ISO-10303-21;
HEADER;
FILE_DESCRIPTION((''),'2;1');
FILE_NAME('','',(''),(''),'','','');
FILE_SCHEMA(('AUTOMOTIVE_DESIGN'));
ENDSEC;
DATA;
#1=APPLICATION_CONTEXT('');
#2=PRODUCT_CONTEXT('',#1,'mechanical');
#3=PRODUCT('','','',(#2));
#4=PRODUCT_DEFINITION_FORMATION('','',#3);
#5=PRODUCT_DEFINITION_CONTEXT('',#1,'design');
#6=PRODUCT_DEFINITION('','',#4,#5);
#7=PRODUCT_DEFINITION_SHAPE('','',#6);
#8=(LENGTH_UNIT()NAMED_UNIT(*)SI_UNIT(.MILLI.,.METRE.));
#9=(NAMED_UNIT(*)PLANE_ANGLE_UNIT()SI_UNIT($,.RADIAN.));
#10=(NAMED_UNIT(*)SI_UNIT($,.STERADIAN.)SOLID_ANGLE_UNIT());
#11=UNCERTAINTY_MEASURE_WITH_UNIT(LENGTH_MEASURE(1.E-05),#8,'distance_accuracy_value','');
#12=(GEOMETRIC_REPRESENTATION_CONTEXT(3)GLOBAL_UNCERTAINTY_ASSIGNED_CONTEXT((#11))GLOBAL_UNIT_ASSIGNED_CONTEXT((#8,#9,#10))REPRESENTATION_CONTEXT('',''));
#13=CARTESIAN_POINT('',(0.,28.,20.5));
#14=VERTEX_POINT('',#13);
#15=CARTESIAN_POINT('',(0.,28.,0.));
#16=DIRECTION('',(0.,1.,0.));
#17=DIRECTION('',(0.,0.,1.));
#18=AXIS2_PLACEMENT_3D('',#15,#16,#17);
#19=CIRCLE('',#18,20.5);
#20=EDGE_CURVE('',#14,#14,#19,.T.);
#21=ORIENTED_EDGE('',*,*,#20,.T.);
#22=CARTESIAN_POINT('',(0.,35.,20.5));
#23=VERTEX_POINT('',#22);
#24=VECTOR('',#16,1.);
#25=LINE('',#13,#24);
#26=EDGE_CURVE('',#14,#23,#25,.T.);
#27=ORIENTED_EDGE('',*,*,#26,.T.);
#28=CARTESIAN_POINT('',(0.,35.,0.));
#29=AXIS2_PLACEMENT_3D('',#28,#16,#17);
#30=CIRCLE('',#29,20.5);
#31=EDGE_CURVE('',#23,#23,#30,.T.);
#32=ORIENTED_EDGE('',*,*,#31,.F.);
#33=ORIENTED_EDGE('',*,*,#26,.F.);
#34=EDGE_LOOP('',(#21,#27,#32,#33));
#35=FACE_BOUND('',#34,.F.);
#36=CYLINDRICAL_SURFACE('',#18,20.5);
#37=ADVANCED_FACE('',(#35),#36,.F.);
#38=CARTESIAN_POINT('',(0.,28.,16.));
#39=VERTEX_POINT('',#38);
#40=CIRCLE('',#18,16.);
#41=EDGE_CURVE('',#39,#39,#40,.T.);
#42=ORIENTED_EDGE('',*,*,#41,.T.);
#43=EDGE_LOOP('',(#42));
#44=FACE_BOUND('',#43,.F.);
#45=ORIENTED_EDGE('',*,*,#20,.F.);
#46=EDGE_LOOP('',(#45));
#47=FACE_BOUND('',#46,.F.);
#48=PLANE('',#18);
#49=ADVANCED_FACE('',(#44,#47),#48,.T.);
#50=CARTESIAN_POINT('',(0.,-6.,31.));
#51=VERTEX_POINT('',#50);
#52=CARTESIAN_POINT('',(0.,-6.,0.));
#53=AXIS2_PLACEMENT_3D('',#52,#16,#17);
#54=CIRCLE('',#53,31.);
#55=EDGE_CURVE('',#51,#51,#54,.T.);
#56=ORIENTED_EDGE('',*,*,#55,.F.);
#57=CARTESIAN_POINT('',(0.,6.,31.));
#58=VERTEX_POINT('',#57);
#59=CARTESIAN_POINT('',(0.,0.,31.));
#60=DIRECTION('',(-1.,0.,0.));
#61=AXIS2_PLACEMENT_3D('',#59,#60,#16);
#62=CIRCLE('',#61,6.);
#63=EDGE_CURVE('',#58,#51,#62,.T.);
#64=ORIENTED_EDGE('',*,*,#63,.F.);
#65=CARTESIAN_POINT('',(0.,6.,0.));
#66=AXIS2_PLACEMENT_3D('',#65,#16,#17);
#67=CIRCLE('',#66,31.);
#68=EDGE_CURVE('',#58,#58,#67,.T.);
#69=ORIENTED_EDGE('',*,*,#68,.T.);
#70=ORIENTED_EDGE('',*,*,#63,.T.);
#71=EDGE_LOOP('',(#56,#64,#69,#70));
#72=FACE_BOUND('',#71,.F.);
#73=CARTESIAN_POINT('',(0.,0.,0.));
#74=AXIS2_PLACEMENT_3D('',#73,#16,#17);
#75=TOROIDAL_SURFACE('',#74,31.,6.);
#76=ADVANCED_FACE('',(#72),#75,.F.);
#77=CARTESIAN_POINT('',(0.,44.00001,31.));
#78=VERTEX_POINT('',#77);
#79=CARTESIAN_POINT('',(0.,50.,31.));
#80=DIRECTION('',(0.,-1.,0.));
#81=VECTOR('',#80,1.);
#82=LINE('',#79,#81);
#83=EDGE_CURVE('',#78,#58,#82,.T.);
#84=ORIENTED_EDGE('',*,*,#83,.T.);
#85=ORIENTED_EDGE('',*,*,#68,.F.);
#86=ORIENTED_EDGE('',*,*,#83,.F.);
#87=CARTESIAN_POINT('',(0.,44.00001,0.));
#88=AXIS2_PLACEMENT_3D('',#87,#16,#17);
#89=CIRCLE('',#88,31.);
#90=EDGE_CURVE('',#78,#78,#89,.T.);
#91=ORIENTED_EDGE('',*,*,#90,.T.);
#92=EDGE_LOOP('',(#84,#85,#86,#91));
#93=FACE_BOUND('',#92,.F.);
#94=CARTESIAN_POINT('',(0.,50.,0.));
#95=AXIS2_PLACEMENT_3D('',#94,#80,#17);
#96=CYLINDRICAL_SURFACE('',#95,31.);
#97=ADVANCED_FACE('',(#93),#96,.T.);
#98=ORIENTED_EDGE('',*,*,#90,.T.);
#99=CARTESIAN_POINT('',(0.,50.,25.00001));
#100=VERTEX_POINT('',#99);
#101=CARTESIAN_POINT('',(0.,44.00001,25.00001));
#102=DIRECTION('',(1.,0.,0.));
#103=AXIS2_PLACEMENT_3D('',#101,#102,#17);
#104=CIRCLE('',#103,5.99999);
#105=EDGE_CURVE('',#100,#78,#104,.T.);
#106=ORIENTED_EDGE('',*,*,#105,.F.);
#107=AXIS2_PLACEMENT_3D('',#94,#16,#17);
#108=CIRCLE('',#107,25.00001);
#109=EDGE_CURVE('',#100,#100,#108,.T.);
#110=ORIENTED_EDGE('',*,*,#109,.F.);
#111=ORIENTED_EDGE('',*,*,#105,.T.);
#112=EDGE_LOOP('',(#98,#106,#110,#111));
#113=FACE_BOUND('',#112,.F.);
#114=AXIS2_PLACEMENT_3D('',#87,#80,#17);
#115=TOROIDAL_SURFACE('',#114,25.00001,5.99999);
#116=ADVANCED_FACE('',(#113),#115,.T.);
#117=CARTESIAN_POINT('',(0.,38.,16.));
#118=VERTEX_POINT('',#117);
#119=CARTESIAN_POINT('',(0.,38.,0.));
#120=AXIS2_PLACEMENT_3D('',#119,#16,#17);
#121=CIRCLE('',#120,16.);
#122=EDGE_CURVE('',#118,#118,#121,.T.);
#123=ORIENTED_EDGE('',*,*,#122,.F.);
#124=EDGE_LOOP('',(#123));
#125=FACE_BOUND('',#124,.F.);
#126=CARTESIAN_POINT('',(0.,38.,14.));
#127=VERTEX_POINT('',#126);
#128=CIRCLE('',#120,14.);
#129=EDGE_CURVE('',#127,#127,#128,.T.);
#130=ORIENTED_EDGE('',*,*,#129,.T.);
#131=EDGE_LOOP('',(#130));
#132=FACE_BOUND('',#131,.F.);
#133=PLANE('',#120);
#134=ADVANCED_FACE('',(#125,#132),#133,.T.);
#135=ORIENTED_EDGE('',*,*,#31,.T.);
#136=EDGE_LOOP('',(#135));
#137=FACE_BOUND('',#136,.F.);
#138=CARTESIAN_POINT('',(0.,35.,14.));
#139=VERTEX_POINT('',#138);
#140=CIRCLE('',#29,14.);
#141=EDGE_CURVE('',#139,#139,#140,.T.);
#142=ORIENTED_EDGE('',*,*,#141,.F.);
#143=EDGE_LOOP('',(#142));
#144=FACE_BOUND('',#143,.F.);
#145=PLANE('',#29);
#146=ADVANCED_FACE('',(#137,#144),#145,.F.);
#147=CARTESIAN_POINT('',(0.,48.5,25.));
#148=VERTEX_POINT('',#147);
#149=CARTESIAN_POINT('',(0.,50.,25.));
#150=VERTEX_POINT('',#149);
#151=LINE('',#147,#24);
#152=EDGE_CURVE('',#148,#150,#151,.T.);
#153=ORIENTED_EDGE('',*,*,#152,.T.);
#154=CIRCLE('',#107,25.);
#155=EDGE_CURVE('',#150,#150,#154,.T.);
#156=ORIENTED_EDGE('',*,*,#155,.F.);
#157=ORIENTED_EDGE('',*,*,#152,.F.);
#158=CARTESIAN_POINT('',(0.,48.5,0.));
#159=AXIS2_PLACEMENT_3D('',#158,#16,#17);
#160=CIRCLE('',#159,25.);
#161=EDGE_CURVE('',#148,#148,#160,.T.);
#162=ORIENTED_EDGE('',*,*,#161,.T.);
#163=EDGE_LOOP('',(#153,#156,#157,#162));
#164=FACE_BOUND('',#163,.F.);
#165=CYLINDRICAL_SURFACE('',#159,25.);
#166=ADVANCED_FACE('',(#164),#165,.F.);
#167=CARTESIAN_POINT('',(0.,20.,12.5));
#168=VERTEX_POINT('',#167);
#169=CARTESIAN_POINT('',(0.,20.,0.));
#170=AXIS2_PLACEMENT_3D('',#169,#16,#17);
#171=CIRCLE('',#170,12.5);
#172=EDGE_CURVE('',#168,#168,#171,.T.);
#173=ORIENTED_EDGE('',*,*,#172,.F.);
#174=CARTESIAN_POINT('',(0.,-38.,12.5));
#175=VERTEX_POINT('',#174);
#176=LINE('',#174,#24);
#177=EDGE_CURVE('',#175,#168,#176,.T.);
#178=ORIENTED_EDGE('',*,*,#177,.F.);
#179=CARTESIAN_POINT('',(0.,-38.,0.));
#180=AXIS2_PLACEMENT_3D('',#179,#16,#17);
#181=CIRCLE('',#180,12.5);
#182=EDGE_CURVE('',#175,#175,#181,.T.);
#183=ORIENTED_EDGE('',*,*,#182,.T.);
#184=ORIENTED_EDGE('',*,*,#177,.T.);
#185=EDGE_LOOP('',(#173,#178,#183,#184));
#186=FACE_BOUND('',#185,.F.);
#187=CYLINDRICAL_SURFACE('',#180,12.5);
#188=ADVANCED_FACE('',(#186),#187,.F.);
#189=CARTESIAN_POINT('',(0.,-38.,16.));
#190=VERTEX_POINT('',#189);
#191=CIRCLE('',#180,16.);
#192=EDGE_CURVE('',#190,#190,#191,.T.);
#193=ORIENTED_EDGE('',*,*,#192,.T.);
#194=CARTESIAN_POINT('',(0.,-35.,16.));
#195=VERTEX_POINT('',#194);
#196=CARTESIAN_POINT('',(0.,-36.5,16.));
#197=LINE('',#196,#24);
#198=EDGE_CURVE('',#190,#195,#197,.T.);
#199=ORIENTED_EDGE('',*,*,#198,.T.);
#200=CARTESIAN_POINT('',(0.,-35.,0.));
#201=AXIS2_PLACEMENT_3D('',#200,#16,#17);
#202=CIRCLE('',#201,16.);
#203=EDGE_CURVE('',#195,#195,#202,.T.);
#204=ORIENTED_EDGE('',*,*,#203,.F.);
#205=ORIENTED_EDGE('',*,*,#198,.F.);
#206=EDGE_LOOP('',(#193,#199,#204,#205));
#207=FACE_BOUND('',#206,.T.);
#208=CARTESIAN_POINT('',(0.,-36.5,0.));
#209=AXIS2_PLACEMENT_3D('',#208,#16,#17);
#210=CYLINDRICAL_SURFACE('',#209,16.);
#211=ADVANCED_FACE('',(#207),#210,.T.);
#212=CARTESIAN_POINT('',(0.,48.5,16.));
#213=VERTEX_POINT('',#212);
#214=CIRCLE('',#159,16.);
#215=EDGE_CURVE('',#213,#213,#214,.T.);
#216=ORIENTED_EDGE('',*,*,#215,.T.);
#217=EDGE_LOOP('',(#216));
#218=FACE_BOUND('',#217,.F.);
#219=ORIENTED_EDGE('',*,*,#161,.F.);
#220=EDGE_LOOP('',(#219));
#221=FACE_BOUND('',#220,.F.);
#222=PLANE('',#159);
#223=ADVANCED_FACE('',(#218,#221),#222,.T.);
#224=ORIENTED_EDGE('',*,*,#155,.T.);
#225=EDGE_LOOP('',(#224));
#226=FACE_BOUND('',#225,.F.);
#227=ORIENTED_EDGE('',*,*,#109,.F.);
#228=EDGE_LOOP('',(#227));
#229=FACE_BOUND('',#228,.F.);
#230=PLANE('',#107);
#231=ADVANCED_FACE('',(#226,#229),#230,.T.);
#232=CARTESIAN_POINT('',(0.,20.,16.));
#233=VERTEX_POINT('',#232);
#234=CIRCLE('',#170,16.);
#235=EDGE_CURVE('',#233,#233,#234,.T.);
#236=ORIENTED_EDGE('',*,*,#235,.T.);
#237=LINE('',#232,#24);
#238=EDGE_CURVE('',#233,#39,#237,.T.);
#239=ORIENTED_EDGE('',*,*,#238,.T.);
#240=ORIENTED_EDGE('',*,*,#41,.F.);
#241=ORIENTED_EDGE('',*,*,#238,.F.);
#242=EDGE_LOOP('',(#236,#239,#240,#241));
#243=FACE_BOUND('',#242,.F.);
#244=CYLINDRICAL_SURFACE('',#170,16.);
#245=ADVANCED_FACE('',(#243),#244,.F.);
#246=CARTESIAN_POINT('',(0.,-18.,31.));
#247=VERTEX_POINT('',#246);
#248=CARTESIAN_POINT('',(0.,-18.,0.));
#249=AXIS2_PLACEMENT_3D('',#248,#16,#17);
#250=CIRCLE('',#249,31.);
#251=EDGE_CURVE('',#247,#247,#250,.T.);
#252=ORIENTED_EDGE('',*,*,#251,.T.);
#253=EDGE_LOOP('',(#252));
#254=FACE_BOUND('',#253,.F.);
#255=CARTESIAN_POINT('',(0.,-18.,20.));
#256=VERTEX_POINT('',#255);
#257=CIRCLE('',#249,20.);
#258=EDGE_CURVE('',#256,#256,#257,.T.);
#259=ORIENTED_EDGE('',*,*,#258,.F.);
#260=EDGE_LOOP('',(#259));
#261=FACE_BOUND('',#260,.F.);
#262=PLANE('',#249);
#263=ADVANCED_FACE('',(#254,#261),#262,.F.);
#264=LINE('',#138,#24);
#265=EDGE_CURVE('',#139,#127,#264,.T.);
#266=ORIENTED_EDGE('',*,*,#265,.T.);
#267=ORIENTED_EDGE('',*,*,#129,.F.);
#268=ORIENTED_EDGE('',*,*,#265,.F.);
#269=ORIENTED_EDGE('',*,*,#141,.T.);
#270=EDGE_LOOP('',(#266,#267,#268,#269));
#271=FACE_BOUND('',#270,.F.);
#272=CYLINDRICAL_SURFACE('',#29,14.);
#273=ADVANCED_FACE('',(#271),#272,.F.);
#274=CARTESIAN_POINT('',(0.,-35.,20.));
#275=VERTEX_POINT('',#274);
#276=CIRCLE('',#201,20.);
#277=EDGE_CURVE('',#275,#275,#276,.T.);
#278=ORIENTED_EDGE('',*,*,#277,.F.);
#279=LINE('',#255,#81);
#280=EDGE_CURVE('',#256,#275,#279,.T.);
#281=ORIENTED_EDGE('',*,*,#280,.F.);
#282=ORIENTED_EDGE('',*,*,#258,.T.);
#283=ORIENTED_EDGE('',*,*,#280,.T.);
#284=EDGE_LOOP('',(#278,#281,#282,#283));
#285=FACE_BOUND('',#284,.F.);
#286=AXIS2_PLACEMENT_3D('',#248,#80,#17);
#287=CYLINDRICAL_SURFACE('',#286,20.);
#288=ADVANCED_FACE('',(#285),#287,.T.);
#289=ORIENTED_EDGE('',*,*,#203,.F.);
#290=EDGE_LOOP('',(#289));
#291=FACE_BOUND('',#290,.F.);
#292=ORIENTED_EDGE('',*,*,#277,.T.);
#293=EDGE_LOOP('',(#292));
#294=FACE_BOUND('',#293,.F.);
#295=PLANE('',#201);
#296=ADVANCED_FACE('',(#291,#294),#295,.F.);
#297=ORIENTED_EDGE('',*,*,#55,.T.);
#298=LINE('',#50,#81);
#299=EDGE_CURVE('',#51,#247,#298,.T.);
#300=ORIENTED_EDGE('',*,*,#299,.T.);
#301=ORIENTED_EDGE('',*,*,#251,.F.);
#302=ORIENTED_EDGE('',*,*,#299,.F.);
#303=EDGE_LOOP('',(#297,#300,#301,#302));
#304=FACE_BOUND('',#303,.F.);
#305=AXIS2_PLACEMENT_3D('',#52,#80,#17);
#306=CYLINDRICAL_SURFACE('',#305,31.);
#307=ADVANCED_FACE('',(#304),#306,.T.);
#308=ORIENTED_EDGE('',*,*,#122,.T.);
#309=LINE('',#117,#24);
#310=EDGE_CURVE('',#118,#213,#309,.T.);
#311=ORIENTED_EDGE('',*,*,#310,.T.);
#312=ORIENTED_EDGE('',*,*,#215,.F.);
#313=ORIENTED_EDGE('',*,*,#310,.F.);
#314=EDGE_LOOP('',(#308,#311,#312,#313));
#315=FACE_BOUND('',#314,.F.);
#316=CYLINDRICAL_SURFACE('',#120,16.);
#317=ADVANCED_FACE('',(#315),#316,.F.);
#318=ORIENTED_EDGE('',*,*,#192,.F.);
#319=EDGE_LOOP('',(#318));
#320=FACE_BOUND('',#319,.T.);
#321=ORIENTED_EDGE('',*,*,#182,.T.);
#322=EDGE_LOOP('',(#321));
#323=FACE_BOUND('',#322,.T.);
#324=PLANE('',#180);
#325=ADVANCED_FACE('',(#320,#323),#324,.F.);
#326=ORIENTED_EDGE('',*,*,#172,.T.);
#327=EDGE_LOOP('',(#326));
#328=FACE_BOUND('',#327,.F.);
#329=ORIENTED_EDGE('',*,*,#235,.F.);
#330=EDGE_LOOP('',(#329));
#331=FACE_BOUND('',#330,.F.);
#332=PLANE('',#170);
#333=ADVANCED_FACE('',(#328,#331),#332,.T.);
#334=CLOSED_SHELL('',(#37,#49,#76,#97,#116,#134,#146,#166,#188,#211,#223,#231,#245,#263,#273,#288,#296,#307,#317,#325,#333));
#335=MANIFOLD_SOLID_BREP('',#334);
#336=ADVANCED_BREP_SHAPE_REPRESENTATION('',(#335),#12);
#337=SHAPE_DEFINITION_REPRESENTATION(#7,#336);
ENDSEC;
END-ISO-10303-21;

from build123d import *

# Parameters (mm, degrees)
F0_W = 3
F0_H = 3.5
F2_R = 5.99999


# Not quite as in the source:
# - a fillet or chamfer is up to 0.001 mm smaller than in the source, because OpenCascade refuses the exact size


with BuildPart() as f1:
    # F0 (on Right) → F1 (revolve)
    with BuildSketch(Plane.YZ):
        with Locations((-36.5, 14.25)):
            Rectangle(F0_W, F0_H)
        Polygon((-18, 12.5), (-18, 20), (-35, 20), (-35, 16), (-35, 12.5), align=None)
        Polygon((-6, 12.5), (-6, 31), (-18, 31), (-18, 20), (-18, 12.5), align=None)
        with BuildLine():
            Line((6, 12.5), (6, 31))
            ThreePointArc((6, 31), (0, 25), (-6, 31))
            Line((-6, 31), (-6, 12.5))
            Line((-6, 12.5), (6, 12.5))
        make_face()
        Polygon((50, 31), (6, 31), (6, 12.5), (20, 12.5), (20, 16), (28, 16), (28, 20.5), (35, 20.5), (35, 14), (38, 14), (38, 16), (48.5, 16), (48.5, 25), (50, 25), align=None)
    revolve(axis=Axis((0, 8.8457800448, 0), (0, 1, 0)))

    # F2 (radius 6 in the source; OpenCascade refuses exactly that, so slightly less here)
    f2_edges = [f1.edges().sort_by_distance(p)[0] for p in [
        (0, 50, -31),
    ]]
    fillet(f2_edges, radius=F2_R)


solid = f1.part
